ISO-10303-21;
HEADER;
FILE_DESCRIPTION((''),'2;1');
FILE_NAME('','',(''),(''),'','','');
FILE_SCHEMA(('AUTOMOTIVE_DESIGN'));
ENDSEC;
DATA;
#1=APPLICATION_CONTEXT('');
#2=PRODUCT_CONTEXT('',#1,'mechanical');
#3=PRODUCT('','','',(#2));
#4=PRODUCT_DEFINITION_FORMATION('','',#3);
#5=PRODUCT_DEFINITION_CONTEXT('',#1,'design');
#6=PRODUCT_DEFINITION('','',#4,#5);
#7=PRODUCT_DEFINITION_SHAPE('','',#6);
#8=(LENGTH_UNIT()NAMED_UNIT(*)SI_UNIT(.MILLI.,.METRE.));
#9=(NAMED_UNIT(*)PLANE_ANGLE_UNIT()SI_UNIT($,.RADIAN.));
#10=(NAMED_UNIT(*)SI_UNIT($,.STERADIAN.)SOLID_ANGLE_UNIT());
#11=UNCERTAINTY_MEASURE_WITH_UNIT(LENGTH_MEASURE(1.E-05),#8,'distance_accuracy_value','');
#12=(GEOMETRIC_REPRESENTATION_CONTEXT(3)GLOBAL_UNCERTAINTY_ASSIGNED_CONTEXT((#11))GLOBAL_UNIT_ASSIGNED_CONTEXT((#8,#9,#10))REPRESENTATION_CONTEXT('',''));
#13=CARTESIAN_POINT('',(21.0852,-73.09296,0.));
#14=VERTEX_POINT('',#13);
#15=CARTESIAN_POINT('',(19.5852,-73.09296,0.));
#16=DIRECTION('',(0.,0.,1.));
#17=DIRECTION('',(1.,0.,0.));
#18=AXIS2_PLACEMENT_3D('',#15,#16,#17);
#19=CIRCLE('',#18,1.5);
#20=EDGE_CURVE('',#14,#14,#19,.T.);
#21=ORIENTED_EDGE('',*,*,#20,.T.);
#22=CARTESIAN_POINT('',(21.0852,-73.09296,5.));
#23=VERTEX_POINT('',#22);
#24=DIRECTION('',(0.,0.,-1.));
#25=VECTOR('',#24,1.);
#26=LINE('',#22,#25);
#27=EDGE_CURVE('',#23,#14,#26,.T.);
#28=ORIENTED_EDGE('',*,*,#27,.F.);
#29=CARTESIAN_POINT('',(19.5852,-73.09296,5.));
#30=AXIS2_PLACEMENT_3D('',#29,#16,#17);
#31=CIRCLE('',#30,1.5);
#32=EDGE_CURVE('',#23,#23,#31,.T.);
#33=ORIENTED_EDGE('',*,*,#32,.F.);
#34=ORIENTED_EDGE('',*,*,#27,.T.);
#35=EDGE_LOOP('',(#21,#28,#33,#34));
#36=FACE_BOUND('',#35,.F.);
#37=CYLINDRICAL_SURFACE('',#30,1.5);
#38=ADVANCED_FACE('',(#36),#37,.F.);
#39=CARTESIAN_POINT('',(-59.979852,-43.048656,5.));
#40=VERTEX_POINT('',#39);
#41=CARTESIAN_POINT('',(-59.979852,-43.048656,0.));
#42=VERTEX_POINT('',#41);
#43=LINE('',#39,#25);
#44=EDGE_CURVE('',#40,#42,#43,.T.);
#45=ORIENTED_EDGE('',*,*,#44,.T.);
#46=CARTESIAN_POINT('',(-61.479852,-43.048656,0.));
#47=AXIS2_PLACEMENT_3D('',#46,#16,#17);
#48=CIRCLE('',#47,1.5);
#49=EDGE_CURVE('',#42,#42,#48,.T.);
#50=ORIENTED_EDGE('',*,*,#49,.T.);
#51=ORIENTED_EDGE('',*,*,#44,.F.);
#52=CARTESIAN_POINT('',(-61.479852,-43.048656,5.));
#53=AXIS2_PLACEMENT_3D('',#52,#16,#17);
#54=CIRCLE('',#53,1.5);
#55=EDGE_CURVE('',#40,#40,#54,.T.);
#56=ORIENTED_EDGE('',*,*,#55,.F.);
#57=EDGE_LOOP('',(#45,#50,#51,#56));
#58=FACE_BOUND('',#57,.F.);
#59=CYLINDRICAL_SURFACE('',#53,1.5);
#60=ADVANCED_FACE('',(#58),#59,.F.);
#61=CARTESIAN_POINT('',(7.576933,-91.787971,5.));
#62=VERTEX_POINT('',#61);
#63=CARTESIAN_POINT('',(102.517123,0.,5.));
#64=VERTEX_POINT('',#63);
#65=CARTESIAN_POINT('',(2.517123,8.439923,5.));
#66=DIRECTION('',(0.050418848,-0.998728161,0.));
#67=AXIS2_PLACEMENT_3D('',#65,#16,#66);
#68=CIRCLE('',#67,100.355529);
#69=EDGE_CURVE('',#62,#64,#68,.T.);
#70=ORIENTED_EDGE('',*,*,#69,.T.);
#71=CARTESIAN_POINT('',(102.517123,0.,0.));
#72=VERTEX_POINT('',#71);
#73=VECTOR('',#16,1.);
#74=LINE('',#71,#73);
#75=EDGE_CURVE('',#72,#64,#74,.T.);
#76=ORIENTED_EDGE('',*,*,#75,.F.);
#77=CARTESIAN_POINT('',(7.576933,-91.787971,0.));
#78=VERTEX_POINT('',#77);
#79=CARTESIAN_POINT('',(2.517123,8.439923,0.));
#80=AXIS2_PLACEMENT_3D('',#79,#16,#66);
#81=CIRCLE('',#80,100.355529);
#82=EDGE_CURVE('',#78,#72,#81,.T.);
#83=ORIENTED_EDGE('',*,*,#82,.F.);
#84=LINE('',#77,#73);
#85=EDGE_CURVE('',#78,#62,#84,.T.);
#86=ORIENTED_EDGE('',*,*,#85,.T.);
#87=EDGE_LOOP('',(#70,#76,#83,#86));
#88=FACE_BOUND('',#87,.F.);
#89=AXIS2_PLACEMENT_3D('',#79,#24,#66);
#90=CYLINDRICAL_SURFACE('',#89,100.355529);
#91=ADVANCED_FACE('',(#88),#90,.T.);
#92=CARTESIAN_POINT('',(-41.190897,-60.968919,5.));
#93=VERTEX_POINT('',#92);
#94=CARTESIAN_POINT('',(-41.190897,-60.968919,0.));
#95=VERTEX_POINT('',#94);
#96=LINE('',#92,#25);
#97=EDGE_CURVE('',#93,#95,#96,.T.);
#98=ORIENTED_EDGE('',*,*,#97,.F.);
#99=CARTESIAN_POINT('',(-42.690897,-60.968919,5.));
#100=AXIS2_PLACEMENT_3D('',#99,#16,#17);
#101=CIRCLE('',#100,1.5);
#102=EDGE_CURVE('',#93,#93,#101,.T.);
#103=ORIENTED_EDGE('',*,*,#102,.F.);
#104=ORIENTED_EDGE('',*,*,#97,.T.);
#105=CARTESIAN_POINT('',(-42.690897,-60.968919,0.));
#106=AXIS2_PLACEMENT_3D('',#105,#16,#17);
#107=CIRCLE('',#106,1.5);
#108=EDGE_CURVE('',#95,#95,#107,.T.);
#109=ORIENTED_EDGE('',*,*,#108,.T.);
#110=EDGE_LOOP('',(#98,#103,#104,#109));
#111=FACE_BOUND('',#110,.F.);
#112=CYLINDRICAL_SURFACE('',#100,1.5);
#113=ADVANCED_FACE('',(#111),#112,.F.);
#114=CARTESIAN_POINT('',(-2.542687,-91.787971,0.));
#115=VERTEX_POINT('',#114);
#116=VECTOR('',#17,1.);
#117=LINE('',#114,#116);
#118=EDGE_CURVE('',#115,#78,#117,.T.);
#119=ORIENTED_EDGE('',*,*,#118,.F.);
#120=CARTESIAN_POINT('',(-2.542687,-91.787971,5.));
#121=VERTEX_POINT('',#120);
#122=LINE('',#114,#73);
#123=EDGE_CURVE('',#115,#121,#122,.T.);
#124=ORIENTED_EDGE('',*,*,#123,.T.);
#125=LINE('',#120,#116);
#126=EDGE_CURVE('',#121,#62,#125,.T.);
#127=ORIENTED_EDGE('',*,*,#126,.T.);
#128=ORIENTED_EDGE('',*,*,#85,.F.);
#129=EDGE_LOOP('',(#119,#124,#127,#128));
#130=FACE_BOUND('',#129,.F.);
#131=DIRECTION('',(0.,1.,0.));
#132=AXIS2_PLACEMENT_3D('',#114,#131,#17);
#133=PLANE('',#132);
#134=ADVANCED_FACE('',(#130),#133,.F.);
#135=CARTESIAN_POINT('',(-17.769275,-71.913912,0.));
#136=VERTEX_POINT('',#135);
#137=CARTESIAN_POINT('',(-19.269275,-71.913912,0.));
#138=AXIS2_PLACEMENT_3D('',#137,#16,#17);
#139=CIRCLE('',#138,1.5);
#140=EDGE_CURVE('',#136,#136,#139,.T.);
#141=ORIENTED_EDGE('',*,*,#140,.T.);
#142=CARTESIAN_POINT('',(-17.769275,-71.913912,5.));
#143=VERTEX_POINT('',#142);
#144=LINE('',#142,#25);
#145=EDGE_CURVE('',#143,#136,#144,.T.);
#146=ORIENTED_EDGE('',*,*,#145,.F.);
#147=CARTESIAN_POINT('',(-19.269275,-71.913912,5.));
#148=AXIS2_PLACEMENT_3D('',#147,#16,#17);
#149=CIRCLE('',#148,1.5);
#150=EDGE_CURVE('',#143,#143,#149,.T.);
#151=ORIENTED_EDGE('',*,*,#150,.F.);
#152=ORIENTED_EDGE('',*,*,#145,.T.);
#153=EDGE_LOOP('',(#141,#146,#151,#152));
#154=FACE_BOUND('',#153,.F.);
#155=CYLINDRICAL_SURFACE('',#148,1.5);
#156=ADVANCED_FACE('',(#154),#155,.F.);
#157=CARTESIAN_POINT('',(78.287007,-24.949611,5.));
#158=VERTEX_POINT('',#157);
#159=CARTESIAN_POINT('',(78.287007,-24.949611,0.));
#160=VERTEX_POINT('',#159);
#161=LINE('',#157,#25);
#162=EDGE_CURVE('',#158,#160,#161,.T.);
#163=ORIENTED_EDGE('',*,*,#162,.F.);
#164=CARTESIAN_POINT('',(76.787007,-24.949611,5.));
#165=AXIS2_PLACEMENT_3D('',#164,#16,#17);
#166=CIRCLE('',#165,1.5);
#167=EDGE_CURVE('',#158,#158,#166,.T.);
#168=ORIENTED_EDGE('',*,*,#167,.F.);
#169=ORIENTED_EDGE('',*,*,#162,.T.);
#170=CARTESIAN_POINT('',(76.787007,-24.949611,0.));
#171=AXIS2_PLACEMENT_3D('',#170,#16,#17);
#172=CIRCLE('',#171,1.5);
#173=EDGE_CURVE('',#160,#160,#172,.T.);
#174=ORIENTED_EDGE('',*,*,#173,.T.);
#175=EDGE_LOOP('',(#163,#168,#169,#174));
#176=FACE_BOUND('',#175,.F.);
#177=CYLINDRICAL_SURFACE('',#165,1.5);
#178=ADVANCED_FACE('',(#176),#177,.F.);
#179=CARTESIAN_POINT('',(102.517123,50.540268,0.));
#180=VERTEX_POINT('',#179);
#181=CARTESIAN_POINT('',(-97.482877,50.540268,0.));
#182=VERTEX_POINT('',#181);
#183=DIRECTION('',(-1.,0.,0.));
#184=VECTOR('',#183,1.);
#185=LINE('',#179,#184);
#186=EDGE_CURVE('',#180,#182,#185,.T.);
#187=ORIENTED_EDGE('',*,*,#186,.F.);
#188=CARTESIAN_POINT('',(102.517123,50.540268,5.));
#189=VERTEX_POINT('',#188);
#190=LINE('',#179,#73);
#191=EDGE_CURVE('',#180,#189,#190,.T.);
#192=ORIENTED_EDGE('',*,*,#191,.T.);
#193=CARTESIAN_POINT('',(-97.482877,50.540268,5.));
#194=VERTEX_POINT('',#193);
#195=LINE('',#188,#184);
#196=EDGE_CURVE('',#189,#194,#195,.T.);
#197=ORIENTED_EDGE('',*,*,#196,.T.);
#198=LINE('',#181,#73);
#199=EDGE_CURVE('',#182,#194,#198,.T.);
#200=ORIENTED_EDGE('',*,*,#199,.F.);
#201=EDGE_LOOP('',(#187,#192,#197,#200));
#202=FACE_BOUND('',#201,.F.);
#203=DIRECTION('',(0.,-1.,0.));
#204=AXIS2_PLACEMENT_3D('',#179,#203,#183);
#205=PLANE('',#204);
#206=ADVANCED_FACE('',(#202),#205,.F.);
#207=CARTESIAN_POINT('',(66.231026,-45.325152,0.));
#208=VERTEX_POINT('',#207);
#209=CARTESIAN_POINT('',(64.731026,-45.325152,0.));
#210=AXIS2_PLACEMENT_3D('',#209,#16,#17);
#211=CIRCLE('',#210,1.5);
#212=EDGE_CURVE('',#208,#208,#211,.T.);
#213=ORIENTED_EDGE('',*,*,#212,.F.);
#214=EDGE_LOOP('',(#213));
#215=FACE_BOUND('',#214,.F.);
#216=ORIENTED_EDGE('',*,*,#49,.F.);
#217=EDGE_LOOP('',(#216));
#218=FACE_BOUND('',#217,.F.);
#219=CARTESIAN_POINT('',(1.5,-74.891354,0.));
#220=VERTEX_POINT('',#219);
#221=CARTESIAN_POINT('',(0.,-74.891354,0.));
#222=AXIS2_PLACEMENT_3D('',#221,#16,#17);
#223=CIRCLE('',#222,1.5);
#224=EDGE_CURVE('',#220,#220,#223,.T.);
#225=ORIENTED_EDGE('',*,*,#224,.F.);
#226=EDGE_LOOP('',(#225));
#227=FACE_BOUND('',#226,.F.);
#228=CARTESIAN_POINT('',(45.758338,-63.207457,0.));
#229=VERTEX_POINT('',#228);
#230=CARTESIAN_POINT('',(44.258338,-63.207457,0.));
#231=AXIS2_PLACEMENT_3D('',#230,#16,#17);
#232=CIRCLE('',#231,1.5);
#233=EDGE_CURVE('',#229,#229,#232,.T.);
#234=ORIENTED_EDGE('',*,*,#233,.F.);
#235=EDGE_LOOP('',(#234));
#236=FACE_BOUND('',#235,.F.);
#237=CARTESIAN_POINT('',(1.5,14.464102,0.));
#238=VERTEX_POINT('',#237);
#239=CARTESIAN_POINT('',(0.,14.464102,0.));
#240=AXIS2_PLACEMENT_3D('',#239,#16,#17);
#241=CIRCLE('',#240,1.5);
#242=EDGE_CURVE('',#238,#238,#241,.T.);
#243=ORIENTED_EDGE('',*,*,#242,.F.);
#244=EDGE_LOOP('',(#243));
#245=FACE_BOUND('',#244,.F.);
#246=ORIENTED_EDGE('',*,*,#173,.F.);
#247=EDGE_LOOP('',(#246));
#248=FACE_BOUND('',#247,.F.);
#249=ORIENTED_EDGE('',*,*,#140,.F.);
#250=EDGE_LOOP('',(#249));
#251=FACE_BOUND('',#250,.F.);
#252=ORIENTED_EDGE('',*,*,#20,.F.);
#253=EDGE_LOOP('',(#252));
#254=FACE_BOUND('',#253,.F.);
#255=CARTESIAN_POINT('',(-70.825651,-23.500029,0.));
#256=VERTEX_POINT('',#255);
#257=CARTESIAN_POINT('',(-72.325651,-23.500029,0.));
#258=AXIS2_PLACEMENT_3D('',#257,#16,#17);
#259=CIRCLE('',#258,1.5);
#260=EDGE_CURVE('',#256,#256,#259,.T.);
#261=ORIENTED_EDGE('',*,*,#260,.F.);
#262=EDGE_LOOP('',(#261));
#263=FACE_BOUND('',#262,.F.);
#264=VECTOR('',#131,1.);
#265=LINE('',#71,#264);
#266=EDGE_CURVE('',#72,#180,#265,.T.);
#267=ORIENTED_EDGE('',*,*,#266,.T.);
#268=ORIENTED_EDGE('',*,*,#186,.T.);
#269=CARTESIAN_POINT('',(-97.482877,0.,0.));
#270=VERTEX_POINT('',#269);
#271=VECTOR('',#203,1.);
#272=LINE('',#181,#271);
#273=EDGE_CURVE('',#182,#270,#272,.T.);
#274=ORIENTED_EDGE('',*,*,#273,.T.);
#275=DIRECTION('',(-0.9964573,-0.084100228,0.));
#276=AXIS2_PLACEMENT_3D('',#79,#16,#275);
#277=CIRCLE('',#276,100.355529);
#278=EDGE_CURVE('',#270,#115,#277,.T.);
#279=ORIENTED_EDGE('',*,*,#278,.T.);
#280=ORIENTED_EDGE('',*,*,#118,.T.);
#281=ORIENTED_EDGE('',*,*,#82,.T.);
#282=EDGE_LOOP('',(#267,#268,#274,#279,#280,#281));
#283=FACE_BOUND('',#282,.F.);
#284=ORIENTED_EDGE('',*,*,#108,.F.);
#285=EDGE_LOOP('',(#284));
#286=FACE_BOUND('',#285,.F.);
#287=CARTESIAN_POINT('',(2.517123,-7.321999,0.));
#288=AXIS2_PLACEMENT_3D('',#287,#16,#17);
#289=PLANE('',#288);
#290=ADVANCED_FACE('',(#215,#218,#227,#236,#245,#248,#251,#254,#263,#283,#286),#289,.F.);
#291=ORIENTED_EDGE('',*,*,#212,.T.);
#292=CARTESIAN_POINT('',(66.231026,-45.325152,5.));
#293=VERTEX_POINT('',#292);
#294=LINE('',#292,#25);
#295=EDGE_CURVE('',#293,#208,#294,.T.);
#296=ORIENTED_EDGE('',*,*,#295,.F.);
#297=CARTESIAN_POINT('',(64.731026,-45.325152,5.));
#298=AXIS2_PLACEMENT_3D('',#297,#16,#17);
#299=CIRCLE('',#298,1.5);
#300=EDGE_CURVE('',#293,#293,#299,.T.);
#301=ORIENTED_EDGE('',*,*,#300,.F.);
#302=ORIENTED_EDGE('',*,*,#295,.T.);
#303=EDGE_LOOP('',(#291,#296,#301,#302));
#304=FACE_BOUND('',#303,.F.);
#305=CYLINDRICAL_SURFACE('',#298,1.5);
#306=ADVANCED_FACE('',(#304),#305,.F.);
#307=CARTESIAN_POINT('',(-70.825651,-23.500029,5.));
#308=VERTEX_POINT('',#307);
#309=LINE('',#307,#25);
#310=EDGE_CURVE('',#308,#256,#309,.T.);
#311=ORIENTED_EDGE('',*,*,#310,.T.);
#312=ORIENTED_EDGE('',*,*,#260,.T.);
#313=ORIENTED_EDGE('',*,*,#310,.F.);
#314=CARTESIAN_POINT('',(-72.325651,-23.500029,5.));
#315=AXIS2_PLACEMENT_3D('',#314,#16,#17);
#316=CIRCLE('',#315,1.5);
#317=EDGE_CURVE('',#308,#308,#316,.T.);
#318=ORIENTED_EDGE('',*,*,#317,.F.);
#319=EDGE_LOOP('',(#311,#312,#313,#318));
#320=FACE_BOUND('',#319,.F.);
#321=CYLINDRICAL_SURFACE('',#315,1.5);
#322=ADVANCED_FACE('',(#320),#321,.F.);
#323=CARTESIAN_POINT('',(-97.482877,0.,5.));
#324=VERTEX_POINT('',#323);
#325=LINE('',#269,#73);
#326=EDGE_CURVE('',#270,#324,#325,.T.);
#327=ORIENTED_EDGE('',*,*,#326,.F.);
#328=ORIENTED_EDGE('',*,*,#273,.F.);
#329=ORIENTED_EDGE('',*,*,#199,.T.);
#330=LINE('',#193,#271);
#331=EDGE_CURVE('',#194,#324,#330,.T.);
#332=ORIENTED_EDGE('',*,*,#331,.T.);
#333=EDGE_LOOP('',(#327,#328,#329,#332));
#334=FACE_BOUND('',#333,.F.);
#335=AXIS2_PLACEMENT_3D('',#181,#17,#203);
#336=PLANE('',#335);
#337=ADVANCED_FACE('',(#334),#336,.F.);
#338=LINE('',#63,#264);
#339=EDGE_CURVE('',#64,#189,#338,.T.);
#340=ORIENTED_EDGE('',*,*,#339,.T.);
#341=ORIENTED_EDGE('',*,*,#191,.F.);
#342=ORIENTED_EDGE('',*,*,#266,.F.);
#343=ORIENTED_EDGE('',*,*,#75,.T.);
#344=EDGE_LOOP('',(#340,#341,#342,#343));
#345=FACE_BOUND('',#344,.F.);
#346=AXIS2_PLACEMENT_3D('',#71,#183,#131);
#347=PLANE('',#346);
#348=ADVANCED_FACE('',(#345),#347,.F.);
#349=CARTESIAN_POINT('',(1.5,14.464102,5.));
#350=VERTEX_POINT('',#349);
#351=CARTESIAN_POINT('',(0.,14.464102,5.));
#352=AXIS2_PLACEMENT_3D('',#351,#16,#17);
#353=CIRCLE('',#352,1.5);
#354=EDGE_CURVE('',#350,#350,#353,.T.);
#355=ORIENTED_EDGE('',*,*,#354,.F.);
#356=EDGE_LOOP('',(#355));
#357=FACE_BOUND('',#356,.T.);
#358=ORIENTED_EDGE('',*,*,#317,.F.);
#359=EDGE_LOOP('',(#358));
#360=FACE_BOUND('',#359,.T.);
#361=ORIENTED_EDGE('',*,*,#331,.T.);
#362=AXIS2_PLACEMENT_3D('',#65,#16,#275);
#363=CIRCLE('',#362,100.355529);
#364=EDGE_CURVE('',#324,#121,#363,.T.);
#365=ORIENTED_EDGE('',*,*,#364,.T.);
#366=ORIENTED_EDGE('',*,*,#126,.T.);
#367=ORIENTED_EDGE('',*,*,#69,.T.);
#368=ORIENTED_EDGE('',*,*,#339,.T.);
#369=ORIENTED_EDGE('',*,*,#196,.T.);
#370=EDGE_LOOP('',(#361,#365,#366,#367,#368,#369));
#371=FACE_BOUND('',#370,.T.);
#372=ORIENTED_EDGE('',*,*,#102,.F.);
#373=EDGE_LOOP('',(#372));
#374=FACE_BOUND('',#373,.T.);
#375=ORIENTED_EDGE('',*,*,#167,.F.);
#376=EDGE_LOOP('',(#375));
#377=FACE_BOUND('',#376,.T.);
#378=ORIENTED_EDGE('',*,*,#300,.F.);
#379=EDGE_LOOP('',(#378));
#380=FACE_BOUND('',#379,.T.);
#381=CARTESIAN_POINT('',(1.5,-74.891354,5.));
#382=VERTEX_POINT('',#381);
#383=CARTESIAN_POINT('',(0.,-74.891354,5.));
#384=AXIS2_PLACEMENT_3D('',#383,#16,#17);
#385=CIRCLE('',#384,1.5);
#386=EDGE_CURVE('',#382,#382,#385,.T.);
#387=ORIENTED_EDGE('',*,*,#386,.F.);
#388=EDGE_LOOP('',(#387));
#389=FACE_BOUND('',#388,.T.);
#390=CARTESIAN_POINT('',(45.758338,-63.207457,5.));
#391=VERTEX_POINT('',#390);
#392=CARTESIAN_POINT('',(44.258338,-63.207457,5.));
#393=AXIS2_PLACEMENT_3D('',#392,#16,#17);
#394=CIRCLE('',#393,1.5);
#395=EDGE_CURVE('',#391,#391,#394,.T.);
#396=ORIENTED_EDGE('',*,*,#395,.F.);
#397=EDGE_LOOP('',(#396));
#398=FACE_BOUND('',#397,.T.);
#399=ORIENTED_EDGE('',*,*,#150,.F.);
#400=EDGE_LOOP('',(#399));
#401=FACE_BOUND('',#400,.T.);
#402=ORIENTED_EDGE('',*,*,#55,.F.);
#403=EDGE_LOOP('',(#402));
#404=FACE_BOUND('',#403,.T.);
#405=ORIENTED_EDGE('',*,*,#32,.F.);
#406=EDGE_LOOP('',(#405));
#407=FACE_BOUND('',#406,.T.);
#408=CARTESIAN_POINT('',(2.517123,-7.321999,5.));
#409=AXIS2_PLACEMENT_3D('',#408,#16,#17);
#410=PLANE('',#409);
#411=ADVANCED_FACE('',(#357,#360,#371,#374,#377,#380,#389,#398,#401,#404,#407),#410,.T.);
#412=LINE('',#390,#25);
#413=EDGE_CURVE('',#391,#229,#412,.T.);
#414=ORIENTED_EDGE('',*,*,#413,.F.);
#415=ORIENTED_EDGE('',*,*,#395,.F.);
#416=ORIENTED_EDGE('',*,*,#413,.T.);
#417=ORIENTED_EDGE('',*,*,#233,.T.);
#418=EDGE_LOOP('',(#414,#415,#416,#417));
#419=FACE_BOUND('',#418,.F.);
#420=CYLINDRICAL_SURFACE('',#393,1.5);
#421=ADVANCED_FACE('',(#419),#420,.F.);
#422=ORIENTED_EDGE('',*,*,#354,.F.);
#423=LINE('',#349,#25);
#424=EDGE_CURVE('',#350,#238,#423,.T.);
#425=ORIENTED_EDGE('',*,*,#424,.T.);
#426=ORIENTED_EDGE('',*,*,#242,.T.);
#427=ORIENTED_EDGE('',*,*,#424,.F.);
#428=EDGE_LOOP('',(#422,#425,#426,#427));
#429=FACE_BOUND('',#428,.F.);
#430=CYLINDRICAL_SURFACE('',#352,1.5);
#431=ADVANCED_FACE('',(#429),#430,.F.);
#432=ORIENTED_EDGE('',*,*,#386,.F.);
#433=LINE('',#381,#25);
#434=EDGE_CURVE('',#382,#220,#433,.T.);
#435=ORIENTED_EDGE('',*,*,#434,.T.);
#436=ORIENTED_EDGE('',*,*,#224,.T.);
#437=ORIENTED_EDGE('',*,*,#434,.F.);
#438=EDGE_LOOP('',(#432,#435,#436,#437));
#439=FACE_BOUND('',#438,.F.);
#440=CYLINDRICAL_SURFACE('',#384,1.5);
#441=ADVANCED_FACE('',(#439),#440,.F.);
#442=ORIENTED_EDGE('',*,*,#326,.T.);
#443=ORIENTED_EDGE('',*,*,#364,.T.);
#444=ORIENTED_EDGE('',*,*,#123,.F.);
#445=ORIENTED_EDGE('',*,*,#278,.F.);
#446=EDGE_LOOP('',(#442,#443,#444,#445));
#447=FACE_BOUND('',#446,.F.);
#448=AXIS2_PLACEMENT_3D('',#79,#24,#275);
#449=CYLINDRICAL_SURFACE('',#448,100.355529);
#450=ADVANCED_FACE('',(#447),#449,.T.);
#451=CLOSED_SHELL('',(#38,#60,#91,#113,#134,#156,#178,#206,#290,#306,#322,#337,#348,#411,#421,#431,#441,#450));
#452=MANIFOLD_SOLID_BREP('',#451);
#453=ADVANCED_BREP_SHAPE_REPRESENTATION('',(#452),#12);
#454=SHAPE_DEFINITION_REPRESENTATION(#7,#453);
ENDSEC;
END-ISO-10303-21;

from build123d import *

# Parameters (mm, degrees)
F1_DEPTH = 5
F2_R     = 1.5
F3_DEPTH = 25


# Not quite as in the source:
# - a feature names something its author has since deleted; it is built from what else it names


with BuildPart() as f1:
    # F0 (on Top) → F1 (new body)
    with BuildSketch(Plane.XY):
        with BuildLine():
            ThreePointArc((-97.4828772247, 0), (-67.2370800722, -63.7098067384), (-2.5426874445, -91.7879705417))
            Line((-2.5426874445, -91.7879705417), (7.5769329952, -91.7879705417))
            ThreePointArc((7.5769329952, -91.7879705417), (72.2713256229, -63.7098067384), (102.5171227753, 0))
            Line((102.5171227753, 0), (102.5171227753, 50.5402684212))
            Line((102.5171227753, 50.5402684212), (-97.4828772247, 50.5402684212))
            Line((-97.4828772247, 50.5402684212), (-97.4828772247, 0))
        make_face()
    extrude(amount=F1_DEPTH)

    # F2 (on face) → F3 (cut)
    with BuildSketch(Plane.XY.offset(5)):
        with Locations((-72.3256510152, -23.5000285577)):
            Circle(F2_R)
        with Locations((-61.4798521783, -43.0486559433)):
            Circle(F2_R)
        with Locations((-42.6908970166, -60.9689194803)):
            Circle(F2_R)
        with Locations((-19.2692746164, -71.9139118934)):
            Circle(F2_R)
        with Locations((0, -74.8913536115)):
            Circle(F2_R)
        with Locations((19.5851995713, -73.0929598765)):
            Circle(F2_R)
        with Locations((44.2583380034, -63.2074572013)):
            Circle(F2_R)
        with Locations((64.7310261921, -45.3251524957)):
            Circle(F2_R)
        with Locations((76.7870070898, -24.9496110183)):
            Circle(F2_R)
        with Locations((0, 14.4641017541)):
            Circle(F2_R)
    extrude(amount=-F3_DEPTH, mode=Mode.SUBTRACT)


solid = f1.part
